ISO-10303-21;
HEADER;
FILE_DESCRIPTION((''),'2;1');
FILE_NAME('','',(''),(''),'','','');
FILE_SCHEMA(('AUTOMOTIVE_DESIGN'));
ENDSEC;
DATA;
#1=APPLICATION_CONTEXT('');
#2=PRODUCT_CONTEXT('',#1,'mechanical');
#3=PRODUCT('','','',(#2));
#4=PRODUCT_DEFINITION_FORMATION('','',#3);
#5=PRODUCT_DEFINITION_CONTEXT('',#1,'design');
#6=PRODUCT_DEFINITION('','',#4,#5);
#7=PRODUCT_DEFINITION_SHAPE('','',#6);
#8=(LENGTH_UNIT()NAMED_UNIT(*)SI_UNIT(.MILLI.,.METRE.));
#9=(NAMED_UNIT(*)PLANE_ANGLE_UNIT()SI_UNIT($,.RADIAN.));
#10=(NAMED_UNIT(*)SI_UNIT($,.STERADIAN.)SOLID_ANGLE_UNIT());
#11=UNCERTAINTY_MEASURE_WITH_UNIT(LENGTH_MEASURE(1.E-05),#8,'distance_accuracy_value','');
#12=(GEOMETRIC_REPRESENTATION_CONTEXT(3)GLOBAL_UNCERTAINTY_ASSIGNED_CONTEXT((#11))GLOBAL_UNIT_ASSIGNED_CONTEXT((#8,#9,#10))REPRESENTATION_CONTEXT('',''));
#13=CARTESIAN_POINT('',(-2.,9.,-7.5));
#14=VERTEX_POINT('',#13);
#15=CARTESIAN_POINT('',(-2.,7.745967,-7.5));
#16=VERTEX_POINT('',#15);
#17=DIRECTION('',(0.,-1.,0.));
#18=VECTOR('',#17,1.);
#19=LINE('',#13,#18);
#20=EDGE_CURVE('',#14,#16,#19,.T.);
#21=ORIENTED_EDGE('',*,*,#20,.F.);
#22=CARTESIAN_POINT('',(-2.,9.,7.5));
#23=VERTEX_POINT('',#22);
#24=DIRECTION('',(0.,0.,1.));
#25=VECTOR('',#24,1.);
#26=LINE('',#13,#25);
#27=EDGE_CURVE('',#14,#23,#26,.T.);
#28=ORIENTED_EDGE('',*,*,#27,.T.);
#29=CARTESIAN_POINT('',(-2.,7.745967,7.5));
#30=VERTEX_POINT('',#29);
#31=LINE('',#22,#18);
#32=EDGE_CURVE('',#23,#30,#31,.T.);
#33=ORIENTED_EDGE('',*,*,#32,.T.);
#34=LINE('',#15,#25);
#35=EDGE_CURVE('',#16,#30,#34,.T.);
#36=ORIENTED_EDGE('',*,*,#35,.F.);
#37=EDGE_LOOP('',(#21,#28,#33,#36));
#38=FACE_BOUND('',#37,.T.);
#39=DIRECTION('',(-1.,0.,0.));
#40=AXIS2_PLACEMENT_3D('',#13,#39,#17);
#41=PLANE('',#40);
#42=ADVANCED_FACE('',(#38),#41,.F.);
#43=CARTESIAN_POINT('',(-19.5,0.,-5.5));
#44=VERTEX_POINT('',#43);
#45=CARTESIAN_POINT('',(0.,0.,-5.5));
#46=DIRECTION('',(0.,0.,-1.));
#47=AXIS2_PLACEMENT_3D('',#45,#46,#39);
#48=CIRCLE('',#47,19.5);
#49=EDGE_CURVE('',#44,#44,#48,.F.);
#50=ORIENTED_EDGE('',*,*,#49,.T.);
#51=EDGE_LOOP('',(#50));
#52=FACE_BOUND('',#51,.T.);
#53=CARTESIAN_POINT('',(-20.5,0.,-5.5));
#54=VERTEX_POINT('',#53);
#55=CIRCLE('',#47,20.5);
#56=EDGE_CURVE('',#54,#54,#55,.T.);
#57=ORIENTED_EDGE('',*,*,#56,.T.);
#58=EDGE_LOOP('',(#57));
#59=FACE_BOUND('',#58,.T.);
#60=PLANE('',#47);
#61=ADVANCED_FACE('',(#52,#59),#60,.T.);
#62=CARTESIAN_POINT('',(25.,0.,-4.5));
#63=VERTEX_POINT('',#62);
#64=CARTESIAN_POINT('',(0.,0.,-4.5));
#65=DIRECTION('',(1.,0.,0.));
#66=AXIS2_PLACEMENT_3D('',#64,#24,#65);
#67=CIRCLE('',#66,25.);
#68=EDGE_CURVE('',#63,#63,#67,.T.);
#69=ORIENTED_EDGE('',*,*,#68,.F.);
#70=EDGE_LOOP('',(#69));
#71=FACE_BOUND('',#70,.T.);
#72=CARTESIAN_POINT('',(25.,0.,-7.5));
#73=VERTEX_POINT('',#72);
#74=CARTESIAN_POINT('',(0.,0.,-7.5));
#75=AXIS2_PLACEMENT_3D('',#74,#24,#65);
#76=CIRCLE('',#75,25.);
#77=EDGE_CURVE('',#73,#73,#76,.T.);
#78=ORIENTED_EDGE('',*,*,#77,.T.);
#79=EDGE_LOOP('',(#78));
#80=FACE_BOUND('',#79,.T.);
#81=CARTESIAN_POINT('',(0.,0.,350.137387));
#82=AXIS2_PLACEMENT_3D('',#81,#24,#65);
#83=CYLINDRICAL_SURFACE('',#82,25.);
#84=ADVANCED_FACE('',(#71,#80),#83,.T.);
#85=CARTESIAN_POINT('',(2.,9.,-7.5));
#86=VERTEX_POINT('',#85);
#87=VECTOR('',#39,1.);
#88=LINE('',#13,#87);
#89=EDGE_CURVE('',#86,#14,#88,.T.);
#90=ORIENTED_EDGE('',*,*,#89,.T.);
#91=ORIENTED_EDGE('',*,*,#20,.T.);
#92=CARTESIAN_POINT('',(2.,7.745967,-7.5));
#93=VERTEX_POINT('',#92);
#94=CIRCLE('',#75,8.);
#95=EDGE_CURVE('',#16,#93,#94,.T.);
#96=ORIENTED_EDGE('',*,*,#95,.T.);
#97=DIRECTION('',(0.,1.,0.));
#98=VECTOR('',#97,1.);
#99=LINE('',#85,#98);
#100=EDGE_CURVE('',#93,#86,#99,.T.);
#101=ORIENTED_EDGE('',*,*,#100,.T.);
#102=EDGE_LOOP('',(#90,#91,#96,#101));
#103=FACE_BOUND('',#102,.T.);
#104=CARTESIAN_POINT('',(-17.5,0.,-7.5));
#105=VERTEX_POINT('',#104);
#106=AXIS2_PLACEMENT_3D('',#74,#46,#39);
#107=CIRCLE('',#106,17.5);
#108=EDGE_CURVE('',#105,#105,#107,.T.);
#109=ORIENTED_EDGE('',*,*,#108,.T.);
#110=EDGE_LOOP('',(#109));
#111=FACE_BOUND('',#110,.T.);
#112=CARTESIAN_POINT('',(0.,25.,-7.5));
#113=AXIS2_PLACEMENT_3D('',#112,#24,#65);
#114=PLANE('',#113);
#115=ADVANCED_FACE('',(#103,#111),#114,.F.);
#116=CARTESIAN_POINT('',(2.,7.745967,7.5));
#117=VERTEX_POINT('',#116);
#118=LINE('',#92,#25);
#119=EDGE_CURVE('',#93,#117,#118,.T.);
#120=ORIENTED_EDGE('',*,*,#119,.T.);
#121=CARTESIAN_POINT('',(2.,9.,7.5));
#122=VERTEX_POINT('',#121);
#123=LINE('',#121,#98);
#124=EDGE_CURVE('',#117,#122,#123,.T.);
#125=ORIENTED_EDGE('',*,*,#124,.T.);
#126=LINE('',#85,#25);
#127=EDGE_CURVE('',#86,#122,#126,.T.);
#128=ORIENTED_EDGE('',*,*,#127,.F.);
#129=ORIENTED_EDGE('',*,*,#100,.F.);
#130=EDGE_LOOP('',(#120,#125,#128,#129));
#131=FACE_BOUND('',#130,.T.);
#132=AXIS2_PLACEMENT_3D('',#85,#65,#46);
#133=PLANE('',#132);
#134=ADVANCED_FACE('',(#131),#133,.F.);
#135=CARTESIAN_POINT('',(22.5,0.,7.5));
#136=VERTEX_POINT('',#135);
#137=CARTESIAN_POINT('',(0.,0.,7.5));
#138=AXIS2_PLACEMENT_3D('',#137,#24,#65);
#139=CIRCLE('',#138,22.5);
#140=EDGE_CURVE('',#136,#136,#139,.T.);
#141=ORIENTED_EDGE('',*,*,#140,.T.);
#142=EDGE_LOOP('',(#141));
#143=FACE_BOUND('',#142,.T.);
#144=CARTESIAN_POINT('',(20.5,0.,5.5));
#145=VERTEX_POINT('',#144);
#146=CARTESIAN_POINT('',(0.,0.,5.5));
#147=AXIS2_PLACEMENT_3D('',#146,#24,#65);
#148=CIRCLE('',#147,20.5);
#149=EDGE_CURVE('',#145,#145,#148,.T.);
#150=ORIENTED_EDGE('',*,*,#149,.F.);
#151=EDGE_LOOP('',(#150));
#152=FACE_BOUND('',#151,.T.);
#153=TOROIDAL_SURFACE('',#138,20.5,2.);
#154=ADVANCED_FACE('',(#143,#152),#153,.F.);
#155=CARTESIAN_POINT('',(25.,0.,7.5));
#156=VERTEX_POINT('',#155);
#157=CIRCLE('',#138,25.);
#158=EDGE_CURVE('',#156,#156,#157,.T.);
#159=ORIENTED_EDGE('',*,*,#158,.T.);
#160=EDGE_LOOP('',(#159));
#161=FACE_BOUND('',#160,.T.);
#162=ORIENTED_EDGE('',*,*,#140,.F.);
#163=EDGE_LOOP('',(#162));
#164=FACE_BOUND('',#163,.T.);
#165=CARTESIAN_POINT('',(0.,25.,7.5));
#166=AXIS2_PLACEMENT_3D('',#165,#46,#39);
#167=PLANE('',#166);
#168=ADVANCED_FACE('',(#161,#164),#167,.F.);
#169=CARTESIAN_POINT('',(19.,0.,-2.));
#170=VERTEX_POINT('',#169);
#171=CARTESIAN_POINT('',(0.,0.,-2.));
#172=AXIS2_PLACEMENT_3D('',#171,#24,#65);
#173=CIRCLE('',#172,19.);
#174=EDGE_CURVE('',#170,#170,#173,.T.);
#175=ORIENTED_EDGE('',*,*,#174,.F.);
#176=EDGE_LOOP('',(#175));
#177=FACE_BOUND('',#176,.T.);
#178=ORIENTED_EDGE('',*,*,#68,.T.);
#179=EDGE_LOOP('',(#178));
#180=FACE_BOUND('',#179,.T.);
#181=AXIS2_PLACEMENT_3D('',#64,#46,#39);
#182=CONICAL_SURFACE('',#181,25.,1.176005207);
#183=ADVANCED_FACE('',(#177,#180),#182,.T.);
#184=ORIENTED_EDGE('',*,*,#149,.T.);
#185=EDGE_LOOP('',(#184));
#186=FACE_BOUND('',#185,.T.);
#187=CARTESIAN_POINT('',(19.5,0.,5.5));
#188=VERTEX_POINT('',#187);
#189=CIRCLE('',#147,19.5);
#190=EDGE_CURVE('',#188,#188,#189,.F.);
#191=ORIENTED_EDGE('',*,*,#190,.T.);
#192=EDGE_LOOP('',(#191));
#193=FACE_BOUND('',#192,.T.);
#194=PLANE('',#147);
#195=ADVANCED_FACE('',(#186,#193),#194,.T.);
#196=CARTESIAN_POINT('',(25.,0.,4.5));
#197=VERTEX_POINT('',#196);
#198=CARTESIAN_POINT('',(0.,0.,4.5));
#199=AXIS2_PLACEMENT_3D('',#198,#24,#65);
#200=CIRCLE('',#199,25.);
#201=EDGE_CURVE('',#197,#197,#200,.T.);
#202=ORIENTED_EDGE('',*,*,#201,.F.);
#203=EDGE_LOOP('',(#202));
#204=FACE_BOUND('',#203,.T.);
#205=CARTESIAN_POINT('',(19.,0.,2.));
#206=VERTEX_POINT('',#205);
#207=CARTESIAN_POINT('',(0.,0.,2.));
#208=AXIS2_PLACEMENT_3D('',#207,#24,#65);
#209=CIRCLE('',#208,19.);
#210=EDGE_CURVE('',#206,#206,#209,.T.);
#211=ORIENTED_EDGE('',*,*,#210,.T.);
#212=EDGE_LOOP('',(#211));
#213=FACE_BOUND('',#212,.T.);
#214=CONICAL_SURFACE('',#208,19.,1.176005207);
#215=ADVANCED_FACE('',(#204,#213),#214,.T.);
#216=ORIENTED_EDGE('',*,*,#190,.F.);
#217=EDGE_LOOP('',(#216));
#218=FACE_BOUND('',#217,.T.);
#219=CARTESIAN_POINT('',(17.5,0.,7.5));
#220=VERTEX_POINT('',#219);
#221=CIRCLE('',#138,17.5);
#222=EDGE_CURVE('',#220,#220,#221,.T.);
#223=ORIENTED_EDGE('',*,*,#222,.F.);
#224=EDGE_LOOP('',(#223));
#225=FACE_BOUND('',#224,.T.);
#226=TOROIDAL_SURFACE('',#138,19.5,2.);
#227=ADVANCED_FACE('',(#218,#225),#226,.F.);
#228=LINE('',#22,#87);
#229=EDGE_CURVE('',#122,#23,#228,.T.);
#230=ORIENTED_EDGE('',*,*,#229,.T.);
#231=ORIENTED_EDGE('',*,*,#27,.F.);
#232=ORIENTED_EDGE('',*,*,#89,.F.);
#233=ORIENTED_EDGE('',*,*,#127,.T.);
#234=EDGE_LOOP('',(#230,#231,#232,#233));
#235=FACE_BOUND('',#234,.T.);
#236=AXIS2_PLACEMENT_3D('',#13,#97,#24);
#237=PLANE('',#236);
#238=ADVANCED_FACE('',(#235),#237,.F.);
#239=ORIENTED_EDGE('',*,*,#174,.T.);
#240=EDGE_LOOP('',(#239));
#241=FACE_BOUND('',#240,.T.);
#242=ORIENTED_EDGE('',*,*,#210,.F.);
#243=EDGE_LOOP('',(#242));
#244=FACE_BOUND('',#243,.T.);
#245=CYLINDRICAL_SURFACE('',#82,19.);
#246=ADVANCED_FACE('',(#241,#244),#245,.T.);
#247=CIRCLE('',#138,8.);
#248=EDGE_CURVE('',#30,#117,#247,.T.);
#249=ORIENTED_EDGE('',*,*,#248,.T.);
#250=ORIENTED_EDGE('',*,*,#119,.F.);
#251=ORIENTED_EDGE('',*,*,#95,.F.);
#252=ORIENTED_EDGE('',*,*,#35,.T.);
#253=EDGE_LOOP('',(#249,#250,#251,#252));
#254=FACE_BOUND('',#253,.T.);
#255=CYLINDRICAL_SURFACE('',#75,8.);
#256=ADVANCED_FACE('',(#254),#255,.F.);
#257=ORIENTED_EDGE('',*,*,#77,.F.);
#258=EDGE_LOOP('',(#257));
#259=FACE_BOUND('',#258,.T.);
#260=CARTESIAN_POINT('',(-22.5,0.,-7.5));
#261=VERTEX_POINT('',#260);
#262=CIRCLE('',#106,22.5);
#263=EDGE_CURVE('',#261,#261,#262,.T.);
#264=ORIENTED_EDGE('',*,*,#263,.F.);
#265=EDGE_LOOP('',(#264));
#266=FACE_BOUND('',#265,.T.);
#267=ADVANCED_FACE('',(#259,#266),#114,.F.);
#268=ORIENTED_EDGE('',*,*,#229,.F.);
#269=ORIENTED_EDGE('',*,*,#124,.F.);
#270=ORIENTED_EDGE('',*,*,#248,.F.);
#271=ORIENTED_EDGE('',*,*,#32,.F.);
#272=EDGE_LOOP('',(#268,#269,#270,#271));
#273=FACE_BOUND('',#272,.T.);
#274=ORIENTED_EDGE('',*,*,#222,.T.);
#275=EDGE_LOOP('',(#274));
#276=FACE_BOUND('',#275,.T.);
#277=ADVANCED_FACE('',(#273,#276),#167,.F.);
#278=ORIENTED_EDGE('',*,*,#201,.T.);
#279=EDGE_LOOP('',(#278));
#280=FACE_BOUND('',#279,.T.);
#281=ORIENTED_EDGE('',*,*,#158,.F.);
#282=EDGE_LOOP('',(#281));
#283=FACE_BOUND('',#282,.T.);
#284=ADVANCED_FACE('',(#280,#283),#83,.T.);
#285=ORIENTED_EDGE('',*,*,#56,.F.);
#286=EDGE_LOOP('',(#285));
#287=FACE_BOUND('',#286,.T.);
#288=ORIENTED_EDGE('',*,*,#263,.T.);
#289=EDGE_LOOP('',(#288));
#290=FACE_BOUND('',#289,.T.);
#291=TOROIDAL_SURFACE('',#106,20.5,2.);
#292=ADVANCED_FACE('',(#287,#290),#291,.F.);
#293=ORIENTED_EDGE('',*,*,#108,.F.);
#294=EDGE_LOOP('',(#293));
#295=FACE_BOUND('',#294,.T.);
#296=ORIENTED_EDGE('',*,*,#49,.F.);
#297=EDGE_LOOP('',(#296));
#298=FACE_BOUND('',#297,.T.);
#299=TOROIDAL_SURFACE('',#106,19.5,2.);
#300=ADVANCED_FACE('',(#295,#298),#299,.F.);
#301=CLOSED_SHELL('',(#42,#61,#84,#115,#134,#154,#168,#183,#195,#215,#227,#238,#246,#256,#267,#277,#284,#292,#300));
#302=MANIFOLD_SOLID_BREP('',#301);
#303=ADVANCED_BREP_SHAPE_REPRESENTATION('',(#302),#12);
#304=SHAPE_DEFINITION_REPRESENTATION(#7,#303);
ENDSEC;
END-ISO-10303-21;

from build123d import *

# Parameters (mm, degrees)
CUT_EXTRUDE1_DEPTH = 39.405728739
SKETCH3_R          = 22.5
SKETCH3_R_2        = 17.5
CUT_EXTRUDE2_DEPTH = 2
CUT_EXTRUDE3_START = -2
SKETCH4_R          = 22.5
SKETCH4_R_2        = 17.5
CUT_EXTRUDE3_DEPTH = 2
FILLET1_R          = 2


with BuildPart() as part:
    # Sketch1 → Revolve1 (revolve)
    with BuildSketch(Plane(origin=(0, 0, 0), x_dir=(0, 0, -1), z_dir=(1, 0, 0)), mode=Mode.PRIVATE) as revolve1_sk:
        Polygon((4.5, 25), (7.5, 25), (7.5, 0), (0, 0), (-7.5, 0), (-7.5, 25), (-4.5, 25), (-2, 19), (2, 19), align=None)
    revolve(revolve1_sk.sketch.rotate(Axis((0, 0, 350.137387165), (0, 0, -1)), 90), axis=Axis((0, 0, 350.137387165), (0, 0, -1)))

    # Sketch2 → Cut-Extrude1 (cut, through all)
    with BuildSketch(Plane.XY.offset(7.5)):
        with BuildLine():
            Line((-2, 9), (2, 9))
            Line((2, 9), (2, 7.745966692))
            ThreePointArc((2, 7.745966692), (0, -8), (-2, 7.745966692))
            Line((-2, 7.745966692), (-2, 9))
        make_face()
    extrude(amount=-CUT_EXTRUDE1_DEPTH, mode=Mode.SUBTRACT)

    # Sketch3 → Cut-Extrude2 (cut)
    with BuildSketch(Plane.XY.offset(7.5)):
        Circle(SKETCH3_R)
        Circle(SKETCH3_R_2, mode=Mode.SUBTRACT)
    extrude(amount=-CUT_EXTRUDE2_DEPTH, mode=Mode.SUBTRACT)

    # Sketch4 → Cut-Extrude3 (cut)
    with BuildSketch(Plane(origin=(0, 0, -7.5), x_dir=(-1, 0, 0), z_dir=(0, 0, -1)).offset(CUT_EXTRUDE3_START)):
        with Locations(Location((0, 0, 0), (0, 0, 180))):
            Circle(SKETCH4_R)
        with Locations(Location((0, 0, 0), (0, 0, 180))):
            Circle(SKETCH4_R_2, mode=Mode.SUBTRACT)
    extrude(amount=CUT_EXTRUDE3_DEPTH, mode=Mode.SUBTRACT)

    # Fillet1
    fillet1_edges = [part.edges().sort_by_distance(p)[0] for p in [
        (-22.5, 0, 5.5),
        (-17.5, 0, 5.5),
        (-22.5, 0, -5.5),
        (-17.5, 0, -5.5),
    ]]
    fillet(fillet1_edges, radius=FILLET1_R - 0.0001)  # a hair under: the kernel refuses the full size


solid = part.part
